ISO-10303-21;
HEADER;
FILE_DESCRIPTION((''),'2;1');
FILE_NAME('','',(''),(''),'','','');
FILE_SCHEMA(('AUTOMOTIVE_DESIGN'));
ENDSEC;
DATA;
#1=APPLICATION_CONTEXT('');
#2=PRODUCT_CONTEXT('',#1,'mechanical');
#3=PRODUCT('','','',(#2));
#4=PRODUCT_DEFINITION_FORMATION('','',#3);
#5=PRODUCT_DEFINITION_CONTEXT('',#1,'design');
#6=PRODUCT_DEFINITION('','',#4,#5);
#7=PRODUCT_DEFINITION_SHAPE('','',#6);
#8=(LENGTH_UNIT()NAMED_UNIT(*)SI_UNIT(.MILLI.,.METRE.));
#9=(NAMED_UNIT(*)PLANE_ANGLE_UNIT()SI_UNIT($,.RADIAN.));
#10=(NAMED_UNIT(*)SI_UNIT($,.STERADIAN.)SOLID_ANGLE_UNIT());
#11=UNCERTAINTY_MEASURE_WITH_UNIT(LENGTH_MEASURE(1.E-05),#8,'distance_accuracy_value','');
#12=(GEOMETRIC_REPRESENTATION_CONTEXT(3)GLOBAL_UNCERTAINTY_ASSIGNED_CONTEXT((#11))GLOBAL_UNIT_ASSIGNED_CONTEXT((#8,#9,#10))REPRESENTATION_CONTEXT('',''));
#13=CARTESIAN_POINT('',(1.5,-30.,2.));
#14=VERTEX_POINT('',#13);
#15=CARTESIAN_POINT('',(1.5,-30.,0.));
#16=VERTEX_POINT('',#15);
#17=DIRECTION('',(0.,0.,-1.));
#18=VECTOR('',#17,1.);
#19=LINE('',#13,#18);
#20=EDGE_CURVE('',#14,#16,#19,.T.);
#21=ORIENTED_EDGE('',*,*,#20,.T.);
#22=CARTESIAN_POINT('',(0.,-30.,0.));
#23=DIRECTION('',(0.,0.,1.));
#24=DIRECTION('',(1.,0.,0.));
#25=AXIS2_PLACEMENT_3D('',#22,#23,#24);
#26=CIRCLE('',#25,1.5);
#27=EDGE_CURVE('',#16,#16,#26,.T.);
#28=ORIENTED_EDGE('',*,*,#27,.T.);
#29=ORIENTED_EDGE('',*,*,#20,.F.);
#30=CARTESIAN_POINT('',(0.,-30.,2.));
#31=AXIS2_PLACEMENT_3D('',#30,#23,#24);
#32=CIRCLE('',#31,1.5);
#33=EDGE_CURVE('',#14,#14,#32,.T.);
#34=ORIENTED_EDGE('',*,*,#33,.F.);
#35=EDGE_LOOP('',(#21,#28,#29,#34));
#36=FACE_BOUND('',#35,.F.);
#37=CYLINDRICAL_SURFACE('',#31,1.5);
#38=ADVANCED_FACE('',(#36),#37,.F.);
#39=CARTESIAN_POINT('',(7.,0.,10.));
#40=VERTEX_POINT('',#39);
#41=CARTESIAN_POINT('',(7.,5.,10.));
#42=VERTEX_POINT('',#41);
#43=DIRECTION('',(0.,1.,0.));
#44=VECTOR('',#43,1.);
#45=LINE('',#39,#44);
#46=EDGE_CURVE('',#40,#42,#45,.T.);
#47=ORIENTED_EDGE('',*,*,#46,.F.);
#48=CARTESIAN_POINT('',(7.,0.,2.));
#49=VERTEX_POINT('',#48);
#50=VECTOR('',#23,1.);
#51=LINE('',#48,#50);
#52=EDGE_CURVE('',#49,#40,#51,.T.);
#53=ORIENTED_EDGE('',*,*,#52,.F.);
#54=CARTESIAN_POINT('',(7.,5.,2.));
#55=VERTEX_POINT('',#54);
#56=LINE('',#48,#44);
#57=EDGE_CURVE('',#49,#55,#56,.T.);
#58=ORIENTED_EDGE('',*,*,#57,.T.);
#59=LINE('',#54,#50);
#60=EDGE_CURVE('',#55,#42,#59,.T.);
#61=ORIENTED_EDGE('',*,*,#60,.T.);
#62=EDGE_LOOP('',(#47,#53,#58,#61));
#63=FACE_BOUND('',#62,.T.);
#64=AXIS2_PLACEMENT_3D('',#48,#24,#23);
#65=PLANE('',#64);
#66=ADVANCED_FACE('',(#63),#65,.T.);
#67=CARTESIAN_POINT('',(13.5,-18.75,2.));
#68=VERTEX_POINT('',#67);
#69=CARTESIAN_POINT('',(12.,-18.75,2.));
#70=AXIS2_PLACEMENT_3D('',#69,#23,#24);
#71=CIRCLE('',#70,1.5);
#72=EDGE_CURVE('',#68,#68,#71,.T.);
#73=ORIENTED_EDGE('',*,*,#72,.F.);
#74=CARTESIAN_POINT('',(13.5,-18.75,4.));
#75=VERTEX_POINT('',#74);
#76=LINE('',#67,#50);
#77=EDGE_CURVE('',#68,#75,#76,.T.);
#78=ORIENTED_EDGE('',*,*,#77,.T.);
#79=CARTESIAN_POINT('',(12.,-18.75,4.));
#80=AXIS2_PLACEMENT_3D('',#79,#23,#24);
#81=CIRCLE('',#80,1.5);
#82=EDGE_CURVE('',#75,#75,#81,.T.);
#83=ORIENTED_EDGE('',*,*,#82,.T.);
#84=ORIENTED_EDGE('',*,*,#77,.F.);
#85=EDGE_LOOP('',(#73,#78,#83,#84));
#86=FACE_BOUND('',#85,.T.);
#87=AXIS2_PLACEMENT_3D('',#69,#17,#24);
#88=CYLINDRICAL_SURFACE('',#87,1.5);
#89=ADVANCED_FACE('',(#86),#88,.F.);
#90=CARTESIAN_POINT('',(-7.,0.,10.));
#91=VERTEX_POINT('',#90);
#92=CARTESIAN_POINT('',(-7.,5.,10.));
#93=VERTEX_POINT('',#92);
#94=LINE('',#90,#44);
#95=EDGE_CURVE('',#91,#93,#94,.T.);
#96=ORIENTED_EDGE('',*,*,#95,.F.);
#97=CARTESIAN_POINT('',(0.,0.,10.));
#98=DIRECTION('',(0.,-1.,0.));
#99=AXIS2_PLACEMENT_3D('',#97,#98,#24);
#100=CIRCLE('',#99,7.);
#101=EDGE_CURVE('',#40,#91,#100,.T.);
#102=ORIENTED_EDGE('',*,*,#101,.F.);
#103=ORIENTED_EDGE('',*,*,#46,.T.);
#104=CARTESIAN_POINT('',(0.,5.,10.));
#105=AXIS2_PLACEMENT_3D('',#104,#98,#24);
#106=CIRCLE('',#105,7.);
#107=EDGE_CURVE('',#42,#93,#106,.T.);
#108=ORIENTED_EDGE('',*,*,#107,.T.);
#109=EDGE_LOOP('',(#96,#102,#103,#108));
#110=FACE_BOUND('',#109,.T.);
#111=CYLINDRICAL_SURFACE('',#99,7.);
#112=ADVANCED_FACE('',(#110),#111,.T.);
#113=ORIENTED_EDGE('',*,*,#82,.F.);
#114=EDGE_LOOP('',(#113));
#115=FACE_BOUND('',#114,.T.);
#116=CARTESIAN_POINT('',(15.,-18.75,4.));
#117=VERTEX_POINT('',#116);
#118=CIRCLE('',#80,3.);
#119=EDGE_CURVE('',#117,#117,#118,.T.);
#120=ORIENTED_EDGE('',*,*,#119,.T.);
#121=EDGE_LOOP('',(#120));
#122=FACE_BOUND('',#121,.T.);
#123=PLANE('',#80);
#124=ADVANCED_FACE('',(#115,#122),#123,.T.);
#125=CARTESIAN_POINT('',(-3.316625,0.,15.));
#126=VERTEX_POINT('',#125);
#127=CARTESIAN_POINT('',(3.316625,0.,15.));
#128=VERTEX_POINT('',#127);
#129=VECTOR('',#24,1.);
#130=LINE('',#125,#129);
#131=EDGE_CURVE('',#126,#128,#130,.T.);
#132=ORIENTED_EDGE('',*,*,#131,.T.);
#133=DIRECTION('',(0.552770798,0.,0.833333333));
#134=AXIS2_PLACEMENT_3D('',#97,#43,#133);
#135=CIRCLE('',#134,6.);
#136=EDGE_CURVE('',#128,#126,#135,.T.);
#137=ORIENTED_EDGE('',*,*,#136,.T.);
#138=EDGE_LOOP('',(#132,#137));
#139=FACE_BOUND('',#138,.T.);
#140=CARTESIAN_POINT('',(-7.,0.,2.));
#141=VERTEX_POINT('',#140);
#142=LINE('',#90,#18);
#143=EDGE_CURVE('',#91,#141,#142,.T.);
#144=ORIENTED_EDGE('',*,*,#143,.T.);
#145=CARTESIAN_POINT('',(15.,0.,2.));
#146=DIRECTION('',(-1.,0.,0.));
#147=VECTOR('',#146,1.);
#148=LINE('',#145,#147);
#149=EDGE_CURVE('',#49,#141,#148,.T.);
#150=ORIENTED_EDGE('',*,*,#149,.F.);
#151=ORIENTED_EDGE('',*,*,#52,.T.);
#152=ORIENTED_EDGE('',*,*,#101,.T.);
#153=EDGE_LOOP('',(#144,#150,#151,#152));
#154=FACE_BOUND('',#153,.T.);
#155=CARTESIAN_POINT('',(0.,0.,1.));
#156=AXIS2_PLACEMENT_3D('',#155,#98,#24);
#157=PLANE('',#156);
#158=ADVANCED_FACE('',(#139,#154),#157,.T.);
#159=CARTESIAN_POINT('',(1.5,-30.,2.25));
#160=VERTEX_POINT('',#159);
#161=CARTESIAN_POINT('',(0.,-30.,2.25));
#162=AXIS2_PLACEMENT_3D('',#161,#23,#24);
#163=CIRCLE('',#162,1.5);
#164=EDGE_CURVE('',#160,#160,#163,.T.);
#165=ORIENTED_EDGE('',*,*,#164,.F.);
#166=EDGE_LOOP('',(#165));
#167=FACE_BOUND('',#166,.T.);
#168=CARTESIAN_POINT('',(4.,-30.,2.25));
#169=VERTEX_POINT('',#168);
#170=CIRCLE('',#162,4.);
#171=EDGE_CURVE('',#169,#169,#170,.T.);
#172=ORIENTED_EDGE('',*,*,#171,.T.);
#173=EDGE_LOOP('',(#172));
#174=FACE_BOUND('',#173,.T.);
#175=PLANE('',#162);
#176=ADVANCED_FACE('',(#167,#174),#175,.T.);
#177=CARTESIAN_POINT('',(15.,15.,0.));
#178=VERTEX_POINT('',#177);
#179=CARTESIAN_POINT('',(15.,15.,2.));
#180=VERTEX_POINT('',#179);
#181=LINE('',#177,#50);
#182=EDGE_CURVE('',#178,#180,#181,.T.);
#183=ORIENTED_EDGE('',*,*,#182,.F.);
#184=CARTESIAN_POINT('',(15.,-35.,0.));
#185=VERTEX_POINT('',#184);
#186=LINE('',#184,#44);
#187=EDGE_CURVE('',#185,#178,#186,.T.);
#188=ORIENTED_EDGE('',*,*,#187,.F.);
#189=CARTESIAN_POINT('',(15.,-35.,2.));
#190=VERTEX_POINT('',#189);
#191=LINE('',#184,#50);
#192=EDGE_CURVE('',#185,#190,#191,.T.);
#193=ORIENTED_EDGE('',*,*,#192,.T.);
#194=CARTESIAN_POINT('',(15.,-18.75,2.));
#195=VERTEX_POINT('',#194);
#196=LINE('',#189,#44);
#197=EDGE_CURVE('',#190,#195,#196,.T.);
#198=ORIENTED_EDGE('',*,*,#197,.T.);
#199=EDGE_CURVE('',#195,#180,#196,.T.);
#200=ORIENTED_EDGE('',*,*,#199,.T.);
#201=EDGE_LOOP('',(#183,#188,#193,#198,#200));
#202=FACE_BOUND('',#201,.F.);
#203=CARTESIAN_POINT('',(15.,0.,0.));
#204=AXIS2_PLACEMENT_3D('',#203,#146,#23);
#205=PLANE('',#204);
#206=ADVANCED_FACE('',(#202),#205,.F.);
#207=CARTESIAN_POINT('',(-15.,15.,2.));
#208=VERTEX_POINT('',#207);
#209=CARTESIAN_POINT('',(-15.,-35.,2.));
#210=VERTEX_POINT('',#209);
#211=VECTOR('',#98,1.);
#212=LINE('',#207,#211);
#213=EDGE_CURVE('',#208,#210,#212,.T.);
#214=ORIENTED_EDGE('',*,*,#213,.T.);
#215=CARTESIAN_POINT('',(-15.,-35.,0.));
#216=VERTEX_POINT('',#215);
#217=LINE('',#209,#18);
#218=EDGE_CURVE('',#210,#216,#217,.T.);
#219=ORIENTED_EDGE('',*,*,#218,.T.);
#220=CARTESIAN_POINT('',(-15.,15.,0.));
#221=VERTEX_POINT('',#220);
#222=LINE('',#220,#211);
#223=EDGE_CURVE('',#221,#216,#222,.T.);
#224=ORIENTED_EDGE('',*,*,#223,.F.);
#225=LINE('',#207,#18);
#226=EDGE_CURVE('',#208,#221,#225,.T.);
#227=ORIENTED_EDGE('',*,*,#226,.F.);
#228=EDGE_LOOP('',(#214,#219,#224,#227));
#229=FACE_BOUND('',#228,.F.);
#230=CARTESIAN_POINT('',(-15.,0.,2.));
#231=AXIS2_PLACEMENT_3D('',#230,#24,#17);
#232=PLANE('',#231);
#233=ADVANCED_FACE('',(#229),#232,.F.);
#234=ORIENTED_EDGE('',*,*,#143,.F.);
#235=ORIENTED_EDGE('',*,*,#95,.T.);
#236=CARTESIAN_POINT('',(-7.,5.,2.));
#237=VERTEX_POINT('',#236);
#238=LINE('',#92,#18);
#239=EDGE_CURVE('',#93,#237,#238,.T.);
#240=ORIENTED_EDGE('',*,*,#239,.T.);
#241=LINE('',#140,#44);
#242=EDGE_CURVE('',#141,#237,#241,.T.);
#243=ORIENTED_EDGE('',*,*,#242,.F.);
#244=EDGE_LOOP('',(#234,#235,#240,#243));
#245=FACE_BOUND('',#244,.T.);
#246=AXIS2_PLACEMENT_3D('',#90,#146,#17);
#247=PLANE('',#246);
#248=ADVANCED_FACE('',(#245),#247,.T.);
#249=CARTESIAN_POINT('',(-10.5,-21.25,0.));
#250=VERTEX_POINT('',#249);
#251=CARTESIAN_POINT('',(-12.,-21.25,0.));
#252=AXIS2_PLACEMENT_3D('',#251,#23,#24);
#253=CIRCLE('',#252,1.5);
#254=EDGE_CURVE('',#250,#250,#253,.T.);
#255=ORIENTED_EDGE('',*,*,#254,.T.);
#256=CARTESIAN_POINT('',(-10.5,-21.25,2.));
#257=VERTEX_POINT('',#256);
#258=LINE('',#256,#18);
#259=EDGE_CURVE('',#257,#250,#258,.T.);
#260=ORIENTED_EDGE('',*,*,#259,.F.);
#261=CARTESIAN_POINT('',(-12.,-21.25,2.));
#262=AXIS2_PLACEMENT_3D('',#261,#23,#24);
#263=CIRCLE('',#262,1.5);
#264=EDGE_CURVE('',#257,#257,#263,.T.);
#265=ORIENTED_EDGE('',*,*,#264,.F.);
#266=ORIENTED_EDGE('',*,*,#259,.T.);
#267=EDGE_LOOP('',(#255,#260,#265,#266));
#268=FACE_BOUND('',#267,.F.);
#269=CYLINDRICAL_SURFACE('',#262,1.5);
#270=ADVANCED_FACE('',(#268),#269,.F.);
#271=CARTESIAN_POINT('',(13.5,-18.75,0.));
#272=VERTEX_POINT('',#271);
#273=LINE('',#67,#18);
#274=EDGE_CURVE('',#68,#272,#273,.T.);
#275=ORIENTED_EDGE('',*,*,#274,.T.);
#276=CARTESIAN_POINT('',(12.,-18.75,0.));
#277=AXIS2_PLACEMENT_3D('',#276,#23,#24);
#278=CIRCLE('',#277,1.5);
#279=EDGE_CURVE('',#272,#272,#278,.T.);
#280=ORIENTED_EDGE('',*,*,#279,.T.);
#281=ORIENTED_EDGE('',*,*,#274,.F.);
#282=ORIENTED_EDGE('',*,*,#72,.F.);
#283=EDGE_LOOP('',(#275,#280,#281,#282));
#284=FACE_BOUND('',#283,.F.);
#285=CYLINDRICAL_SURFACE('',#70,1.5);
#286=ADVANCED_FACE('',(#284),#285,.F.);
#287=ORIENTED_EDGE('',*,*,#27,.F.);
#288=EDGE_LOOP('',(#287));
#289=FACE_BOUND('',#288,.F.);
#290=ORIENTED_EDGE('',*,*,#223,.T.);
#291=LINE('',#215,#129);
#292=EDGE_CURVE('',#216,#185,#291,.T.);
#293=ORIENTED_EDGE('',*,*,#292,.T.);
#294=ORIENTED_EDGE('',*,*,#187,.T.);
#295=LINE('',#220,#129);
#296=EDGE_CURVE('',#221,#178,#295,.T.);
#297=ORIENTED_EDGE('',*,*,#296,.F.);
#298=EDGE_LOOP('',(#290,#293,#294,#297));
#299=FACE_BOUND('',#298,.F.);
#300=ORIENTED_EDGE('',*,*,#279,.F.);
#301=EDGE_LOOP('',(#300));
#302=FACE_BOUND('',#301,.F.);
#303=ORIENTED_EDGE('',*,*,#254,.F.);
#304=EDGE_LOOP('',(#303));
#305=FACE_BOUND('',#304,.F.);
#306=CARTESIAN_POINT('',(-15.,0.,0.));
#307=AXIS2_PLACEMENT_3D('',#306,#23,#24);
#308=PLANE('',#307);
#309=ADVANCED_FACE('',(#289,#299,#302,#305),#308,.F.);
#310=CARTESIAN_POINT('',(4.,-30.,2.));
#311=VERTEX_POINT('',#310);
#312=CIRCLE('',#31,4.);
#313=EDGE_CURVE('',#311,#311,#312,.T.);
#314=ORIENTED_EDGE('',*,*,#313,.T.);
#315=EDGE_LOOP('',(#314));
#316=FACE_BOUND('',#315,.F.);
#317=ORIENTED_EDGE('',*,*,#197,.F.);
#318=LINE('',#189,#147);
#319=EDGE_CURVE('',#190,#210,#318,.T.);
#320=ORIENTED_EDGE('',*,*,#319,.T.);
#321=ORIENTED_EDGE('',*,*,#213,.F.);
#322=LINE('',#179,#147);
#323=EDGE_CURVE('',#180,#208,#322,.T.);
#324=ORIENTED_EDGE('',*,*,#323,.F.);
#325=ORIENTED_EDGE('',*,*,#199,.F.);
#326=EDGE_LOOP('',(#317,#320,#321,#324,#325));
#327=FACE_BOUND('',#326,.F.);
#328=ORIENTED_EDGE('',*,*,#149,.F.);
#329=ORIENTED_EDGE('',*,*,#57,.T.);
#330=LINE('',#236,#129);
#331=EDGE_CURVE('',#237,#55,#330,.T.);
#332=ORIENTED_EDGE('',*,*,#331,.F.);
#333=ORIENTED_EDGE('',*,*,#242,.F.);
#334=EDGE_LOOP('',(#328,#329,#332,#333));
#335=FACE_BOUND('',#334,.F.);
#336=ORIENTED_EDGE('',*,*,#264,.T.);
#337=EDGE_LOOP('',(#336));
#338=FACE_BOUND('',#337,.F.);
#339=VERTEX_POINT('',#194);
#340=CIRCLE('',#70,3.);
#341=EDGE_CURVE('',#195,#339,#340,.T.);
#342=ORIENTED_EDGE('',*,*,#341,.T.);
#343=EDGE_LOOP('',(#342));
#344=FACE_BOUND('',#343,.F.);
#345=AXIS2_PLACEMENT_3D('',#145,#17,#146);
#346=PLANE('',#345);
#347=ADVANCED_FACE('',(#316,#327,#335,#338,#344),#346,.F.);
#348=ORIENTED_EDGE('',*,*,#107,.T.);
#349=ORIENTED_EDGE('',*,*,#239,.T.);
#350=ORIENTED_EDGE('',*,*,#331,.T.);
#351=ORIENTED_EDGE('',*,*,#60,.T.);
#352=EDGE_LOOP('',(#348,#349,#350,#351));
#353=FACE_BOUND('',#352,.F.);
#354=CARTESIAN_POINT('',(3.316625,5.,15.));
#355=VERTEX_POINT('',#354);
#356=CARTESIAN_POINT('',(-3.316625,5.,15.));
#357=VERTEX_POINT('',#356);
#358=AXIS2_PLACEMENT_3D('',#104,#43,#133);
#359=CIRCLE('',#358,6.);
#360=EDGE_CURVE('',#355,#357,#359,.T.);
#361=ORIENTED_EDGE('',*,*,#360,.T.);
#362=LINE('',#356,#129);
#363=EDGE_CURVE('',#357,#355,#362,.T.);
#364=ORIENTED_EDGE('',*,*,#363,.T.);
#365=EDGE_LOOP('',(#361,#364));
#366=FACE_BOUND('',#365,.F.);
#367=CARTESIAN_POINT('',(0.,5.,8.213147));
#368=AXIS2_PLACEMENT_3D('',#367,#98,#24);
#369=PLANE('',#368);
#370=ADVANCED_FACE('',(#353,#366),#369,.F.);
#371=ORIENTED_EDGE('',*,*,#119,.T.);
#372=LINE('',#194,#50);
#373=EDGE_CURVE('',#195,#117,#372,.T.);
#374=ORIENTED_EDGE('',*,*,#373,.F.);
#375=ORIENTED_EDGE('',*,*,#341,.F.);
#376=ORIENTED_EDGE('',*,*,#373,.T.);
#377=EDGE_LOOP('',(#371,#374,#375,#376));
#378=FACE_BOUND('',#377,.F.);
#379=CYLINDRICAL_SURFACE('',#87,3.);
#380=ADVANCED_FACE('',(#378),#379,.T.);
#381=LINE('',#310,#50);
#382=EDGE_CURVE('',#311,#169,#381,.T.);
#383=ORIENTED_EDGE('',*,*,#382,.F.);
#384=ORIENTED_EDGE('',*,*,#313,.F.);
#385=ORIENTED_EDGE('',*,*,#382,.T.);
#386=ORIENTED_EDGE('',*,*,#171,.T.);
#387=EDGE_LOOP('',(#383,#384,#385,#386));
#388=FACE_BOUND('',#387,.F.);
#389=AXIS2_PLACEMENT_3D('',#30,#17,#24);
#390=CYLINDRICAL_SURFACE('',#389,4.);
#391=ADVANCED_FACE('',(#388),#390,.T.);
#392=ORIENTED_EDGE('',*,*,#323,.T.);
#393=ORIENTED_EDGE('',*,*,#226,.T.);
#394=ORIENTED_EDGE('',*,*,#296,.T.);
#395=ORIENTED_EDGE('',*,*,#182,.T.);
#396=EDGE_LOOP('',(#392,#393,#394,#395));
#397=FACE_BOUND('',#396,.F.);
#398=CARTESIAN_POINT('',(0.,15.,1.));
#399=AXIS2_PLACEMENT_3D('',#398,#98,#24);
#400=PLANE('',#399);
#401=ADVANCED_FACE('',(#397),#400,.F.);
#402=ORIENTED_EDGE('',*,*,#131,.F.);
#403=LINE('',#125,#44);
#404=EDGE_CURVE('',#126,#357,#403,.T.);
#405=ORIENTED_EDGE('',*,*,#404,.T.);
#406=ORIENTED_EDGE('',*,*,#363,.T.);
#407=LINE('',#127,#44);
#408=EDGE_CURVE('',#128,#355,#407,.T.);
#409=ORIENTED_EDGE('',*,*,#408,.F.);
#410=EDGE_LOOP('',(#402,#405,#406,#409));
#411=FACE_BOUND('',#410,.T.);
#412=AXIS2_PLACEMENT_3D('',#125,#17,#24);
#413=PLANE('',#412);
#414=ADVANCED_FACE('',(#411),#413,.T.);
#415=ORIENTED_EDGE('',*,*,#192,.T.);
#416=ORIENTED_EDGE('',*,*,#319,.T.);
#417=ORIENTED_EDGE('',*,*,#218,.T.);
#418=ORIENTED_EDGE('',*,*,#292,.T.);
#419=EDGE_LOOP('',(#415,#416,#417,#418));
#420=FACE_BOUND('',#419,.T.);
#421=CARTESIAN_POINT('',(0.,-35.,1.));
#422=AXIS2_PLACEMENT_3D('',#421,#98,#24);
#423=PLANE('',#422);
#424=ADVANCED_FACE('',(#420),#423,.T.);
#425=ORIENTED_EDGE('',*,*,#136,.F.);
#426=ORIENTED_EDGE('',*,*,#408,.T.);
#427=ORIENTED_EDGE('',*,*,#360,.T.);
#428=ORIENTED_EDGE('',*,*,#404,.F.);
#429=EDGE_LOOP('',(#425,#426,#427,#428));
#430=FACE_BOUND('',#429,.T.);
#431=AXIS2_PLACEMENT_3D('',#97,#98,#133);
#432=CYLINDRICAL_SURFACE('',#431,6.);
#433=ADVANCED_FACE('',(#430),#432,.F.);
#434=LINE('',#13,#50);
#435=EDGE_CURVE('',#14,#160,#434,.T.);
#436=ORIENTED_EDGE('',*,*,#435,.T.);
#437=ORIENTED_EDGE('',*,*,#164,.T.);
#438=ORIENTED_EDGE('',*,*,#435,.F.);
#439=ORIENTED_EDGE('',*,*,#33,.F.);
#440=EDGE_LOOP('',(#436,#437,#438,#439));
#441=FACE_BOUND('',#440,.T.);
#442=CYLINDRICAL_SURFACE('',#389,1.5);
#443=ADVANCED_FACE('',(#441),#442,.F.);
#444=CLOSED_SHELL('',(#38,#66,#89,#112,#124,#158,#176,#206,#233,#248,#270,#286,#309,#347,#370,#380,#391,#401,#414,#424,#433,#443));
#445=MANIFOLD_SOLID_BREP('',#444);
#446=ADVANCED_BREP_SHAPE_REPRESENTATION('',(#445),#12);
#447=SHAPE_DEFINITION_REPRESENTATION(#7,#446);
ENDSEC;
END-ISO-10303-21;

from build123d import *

# Parameters (mm, degrees)
F1_DEPTH = 5
F2_DEPTH = 15
F3_DEPTH = 35
F4_R     = 3
F4_R_2   = 1.5
F5_DEPTH = 2
F4_R_3   = 4
F6_DEPTH = 0.25
F7_DEPTH = 25


# Not quite as in the source:
# - a feature names something its author has since deleted; it is built from what else it names


with BuildPart() as f1:
    # F0 (on Front) → F1 (new body)
    with BuildSketch(Plane.XZ):
        with BuildLine():
            Line((7, 2), (7, 10))
            ThreePointArc((7, 10), (0, 17), (-7, 10))
            Line((-7, 10), (-7, 2))
            Line((-7, 2), (7, 2))
        make_face()
        with BuildLine():
            ThreePointArc((3.3166247904, 15), (0, 4), (-3.3166247904, 15))
            Line((-3.3166247904, 15), (3.3166247904, 15))
        make_face(mode=Mode.SUBTRACT)
    extrude(amount=-F1_DEPTH)

    # F0 (on Front) → F2 (join)
    with BuildSketch(Plane.XZ):
        Polygon((15, 2), (7, 2), (-7, 2), (-15, 2), (-15, 0), (15, 0), align=None)
    extrude(amount=-F2_DEPTH)

    # F0 (on Front) → F3 (join)
    with BuildSketch(Plane.XZ):
        Polygon((15, 2), (7, 2), (-7, 2), (-15, 2), (-15, 0), (15, 0), align=None)
    extrude(amount=F3_DEPTH)

    # F4 (on face) → F5 (join)
    with BuildSketch(Plane.XY.offset(2)):
        with Locations((12, -18.75)):
            Circle(F4_R)
        with Locations((12, -18.75)):
            Circle(F4_R_2, mode=Mode.SUBTRACT)
    extrude(amount=F5_DEPTH)

    # F4 (on face) → F6 (join)
    with BuildSketch(Plane.XY.offset(2)):
        with Locations((0, -30)):
            Circle(F4_R_3)
        with Locations((0, -30)):
            Circle(F4_R_2, mode=Mode.SUBTRACT)
    extrude(amount=F6_DEPTH)

    # F4 (on face) → F7 (cut)
    with BuildSketch(Plane.XY.offset(2)):
        with Locations((-12, -21.25)):
            Circle(F4_R_2)
        with Locations((0, -30)):
            Circle(F4_R_2)
        with Locations((12, -18.75)):
            Circle(F4_R_2)
    extrude(amount=-F7_DEPTH, mode=Mode.SUBTRACT)


solid = f1.part
